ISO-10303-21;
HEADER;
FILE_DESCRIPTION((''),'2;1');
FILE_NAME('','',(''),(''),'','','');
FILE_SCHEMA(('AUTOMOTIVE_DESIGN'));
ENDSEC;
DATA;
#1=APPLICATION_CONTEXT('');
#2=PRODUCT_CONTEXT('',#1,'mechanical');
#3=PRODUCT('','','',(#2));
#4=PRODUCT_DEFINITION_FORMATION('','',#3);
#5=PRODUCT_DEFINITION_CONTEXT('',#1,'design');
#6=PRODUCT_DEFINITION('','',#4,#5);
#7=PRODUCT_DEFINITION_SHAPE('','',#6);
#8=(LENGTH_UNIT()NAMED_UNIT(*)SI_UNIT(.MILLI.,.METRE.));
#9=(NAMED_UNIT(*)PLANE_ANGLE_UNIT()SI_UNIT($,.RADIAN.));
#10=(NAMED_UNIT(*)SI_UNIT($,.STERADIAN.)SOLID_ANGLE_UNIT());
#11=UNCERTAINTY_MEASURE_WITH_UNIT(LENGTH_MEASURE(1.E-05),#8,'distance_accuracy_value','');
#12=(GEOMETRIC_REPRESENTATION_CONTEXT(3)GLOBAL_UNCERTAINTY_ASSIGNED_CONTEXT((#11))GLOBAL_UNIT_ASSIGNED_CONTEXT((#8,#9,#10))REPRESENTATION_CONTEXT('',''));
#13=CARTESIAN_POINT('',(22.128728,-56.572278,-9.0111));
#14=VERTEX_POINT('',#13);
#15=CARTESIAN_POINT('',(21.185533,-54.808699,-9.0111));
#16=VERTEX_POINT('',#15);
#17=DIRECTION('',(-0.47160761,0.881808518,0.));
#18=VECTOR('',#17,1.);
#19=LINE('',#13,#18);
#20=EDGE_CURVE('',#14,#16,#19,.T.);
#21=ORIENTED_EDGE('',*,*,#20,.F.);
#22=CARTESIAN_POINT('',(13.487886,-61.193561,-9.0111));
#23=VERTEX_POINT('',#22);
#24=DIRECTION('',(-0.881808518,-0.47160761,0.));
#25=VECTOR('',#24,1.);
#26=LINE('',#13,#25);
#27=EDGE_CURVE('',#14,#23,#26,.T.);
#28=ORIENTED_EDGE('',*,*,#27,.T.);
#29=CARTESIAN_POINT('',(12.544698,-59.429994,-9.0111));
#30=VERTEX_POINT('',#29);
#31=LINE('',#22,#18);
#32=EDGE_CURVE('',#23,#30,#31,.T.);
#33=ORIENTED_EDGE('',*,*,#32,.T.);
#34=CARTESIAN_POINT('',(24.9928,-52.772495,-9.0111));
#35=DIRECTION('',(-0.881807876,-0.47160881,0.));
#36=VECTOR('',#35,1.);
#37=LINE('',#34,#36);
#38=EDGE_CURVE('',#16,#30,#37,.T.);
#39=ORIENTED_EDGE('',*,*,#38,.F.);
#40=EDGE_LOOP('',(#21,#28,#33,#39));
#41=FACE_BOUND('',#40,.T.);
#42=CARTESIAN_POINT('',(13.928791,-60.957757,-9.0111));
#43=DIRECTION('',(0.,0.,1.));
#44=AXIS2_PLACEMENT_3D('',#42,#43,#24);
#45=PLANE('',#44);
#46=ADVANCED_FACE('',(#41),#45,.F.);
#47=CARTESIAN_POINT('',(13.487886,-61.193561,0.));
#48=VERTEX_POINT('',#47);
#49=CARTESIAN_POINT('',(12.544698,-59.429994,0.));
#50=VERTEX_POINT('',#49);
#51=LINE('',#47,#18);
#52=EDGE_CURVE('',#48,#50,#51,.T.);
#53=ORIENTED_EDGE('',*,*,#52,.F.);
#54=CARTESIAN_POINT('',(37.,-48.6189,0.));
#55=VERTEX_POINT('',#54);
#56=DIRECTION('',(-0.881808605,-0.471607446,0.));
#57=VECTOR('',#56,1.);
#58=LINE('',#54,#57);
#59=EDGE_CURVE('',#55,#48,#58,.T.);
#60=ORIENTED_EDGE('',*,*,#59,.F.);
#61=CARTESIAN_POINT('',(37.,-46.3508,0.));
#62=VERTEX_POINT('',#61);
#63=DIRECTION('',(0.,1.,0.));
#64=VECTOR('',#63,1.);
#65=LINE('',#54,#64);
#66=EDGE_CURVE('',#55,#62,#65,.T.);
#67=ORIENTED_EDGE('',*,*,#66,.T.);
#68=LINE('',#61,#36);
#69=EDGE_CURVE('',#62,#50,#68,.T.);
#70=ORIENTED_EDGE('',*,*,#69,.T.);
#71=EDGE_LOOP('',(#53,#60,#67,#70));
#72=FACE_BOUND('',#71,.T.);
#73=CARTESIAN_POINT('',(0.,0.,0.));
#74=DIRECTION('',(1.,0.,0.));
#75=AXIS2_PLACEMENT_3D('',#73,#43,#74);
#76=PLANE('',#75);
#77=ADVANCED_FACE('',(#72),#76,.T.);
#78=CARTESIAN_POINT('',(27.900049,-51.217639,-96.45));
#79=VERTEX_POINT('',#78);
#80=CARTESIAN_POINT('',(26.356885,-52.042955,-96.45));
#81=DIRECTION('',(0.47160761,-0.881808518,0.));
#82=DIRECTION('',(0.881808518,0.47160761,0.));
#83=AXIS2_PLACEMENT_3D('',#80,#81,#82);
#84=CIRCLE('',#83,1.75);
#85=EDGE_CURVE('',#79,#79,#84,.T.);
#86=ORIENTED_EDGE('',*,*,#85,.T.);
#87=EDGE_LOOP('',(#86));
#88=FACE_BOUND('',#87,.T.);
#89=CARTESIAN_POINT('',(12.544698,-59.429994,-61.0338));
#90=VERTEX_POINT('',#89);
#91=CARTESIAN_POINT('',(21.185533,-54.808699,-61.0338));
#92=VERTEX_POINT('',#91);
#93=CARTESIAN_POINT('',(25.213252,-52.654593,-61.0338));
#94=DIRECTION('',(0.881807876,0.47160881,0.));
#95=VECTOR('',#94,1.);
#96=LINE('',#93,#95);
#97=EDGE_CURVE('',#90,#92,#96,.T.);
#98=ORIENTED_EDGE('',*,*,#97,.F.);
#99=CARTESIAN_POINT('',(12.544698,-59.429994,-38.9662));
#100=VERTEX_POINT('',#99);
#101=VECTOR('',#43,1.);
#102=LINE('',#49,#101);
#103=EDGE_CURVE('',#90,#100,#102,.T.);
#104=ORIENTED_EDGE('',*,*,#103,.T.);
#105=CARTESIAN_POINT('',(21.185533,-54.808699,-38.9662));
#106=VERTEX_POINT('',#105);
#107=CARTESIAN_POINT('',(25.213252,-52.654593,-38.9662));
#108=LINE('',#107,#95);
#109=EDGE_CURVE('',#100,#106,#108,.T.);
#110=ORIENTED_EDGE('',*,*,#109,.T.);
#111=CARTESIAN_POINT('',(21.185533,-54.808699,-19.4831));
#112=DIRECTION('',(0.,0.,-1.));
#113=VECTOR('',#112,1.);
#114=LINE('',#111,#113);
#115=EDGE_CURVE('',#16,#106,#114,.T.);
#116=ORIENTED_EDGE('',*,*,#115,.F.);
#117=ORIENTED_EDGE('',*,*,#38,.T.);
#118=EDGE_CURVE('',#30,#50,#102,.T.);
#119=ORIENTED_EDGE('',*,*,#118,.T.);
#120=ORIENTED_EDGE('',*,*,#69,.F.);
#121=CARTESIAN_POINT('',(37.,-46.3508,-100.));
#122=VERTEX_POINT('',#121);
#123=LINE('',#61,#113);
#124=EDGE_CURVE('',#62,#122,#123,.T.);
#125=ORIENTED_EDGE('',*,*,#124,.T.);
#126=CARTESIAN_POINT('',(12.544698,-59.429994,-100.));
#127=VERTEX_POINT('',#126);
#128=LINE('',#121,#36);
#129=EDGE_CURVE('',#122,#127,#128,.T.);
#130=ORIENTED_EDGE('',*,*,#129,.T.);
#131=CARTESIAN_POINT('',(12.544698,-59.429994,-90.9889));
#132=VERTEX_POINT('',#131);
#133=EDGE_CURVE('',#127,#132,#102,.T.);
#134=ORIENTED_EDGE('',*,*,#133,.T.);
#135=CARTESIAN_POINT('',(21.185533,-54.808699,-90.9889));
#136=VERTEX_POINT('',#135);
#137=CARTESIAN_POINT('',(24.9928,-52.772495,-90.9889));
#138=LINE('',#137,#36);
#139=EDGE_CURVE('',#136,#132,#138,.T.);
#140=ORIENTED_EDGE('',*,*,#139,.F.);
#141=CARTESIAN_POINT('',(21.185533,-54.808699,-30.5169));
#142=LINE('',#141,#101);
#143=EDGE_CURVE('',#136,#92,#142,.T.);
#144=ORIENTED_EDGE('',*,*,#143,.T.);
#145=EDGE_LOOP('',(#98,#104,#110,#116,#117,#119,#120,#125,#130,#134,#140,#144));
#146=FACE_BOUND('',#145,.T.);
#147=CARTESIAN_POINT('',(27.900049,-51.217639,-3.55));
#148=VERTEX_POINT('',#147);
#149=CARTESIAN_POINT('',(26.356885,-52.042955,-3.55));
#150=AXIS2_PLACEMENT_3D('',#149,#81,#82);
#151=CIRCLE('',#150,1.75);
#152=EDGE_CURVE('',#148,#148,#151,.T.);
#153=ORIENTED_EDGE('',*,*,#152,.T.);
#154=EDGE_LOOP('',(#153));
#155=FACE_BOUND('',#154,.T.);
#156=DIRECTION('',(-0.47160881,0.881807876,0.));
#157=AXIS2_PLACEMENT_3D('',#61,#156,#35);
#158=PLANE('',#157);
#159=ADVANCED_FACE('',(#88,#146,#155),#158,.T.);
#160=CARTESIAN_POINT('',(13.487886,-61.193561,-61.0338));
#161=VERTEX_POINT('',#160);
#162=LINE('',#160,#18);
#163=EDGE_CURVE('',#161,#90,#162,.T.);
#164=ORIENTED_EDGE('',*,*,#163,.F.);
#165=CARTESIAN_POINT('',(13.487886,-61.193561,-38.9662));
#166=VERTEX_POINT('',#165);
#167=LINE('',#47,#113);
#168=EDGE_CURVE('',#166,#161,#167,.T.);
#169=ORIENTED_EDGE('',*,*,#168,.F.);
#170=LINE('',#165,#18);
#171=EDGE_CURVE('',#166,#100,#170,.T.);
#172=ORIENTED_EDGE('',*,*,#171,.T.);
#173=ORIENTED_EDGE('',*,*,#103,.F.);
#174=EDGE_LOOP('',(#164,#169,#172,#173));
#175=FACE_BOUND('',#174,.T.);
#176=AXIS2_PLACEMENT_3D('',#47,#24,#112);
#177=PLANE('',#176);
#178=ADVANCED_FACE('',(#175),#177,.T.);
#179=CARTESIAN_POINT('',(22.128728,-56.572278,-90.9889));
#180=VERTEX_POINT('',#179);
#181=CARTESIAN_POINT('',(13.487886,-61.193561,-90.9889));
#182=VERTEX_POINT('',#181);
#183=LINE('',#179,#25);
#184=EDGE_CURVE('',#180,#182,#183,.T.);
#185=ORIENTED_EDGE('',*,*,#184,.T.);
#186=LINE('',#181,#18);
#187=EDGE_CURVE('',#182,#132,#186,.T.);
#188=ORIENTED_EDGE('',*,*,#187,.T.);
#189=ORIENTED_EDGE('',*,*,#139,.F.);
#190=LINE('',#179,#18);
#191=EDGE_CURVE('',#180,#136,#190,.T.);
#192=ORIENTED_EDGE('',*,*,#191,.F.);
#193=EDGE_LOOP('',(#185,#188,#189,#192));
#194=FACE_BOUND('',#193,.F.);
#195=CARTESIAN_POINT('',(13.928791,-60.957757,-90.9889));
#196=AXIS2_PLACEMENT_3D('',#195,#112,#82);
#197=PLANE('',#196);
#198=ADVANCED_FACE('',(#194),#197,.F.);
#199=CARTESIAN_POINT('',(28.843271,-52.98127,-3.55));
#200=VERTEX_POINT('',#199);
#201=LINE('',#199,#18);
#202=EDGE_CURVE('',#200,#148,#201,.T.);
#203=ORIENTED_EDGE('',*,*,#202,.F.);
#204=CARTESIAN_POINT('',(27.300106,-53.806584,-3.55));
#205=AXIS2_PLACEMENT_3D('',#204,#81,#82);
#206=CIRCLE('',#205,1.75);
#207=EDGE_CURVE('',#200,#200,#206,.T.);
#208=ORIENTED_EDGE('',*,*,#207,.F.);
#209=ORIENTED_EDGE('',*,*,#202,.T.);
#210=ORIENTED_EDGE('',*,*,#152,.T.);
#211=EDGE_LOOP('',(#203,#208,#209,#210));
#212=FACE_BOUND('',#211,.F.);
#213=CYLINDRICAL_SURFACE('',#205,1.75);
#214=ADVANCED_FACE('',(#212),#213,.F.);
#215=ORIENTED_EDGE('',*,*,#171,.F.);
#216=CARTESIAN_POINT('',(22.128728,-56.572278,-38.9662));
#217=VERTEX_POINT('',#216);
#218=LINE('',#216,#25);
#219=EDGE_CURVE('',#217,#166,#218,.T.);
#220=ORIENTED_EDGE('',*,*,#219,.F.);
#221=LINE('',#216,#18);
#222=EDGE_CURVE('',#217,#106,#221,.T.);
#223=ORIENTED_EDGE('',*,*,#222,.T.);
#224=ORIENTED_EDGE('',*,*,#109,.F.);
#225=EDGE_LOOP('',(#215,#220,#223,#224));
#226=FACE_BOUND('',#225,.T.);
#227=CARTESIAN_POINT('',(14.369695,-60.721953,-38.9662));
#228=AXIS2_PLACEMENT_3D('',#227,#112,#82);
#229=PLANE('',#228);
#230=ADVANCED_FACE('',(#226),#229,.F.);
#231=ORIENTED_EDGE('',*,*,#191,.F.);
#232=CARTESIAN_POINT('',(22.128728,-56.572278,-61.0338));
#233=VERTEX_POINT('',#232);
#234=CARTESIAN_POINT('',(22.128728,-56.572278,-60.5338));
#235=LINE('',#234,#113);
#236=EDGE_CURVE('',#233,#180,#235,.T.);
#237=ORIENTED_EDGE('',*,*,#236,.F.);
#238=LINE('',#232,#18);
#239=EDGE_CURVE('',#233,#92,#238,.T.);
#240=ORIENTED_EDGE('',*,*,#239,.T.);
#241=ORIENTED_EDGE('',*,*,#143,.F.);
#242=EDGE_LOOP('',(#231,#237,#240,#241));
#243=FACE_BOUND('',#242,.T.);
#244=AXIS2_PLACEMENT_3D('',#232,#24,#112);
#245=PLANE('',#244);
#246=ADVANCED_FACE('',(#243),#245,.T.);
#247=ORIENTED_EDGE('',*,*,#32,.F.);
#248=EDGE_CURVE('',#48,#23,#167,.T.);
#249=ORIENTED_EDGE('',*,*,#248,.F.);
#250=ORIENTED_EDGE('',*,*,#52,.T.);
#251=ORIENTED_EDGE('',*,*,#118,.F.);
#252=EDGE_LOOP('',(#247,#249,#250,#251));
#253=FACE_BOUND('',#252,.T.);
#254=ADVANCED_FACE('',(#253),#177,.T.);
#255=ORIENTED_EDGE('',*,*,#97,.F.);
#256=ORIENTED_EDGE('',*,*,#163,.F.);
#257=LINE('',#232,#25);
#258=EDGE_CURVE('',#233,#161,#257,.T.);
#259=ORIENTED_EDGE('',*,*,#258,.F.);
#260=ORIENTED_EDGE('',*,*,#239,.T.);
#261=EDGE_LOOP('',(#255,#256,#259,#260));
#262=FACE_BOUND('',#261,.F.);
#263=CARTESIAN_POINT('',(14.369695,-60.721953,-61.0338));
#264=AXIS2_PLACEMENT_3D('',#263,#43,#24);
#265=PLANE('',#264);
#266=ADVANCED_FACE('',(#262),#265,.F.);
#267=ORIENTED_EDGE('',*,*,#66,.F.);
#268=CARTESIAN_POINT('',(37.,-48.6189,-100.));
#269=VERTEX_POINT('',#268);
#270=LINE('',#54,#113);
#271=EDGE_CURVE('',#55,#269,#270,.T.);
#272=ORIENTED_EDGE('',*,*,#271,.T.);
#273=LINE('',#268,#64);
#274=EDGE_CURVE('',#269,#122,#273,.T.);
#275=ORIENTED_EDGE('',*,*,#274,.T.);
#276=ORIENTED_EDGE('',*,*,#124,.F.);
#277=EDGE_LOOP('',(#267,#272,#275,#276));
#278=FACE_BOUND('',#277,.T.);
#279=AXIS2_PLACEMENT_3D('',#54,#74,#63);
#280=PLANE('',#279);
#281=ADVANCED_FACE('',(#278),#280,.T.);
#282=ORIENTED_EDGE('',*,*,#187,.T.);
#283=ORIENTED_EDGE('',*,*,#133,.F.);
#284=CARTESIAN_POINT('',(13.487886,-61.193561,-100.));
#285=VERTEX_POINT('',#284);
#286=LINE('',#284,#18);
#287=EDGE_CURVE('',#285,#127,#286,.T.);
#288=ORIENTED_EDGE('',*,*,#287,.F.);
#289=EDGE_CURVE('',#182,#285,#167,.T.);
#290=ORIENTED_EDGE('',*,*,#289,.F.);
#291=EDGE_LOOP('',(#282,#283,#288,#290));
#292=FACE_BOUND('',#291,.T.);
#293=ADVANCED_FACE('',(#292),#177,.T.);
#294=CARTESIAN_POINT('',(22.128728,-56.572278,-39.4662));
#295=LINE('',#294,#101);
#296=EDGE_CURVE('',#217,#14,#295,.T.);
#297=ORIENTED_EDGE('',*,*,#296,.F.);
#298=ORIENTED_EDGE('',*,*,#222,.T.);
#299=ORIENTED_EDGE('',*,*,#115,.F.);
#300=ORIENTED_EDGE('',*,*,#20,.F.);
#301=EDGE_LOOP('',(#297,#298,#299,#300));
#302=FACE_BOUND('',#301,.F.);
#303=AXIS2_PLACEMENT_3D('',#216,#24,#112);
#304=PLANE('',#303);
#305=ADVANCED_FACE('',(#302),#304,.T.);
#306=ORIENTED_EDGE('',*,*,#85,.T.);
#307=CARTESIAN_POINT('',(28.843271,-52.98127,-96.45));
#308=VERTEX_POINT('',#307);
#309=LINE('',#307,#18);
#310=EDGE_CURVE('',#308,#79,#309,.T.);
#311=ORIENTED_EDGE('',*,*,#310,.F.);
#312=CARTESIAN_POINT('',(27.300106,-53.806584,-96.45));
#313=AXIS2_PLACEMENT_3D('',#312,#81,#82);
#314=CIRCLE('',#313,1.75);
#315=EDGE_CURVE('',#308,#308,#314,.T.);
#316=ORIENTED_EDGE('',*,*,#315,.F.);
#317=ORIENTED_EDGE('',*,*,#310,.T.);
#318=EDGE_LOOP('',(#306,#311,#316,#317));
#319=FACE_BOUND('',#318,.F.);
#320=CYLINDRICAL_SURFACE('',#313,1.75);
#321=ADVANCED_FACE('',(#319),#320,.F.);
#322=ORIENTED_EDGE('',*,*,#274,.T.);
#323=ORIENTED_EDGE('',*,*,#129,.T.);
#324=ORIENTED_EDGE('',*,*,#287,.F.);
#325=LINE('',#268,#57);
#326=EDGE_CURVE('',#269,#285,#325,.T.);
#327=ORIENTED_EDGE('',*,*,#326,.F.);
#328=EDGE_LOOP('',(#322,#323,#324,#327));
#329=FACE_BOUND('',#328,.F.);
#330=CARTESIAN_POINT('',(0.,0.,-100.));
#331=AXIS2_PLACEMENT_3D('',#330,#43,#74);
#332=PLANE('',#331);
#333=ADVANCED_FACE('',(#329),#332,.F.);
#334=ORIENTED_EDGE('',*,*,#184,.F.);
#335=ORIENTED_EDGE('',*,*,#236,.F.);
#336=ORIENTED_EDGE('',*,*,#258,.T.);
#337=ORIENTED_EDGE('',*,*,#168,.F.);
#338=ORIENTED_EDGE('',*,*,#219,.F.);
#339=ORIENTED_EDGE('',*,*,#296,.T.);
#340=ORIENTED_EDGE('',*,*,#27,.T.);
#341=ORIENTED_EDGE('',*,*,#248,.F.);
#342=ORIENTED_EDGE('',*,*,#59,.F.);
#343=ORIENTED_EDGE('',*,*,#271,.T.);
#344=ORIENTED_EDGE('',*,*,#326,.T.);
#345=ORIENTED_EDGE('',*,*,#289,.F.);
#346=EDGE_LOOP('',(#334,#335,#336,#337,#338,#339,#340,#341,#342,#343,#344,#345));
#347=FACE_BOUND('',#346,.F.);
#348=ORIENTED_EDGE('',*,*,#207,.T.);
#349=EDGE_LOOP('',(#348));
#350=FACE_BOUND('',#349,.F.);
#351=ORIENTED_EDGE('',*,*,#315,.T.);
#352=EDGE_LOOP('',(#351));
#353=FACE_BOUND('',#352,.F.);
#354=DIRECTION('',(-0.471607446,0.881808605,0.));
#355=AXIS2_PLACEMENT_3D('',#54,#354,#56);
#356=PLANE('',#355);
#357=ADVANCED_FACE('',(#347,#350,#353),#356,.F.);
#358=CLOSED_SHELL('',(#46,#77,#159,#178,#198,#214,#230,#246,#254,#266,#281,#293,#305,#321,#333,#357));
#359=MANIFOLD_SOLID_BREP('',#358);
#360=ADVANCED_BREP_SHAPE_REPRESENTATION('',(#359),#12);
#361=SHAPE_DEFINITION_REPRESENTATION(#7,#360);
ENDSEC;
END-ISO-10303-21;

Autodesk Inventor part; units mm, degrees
ref_plane "YZ Plane" through (0, 0, 0) normal (1, 0, 0) x (0, 1, 0)
ref_plane "XZ Plane" through (0, 0, 0) normal (0, 1, 0) x (-1, 0, 0)
ref_plane "XY Plane" through (0, 0, 0) normal (0, 0, 1) x (1, 0, 0)
sketch "Szkic1" plane through (0, 0, 0) normal (0, 0, 1) x (1, 0, 0)
  line L0 (0, 0) -> (0, -66.5) projected
  line L1 (0, -66.5) -> (2, -66.5) projected
  line L2 (2, 0) -> (2, -66.5) projected
  line L3 (0, 0) -> (2, 0) projected
  circle A0 centre (7, 15.8) radius 1.5 projected
  circle A1 centre (7, 15.8) radius 15.02 projected
  line L4 (7, 30.82) -> (7, 14.3)
  line L5 (7, -69.18) -> (-7.0129, -69.18)
  line L6 (37, -46.3508) -> (4.3309, -63.8229) projected
  line L7 (37, -48.6189) -> (3.5105, -66.5297) projected
  line L8 (37, -48.6189) -> (37, -46.3508)
  line L9 (37, -48.6189) -> (-1.4451, -69.18)
  line L10 (37, -46.3508) -> (-1.4451, -66.9119)
  line L11 (-1.4451, -66.9119) -> (-1.4451, -69.18)
  dimension "d0" = 100
extrude "Wyciągnięcie proste1" add sketch "Szkic1" against normal blind 100 contours L10 L2 L1 L0 | L0 L1 L2 L10 L6 L8 L7 L9 L11
sketch "Szkic5" plane through (-1.4451, -69.18, -100) normal (0.4716076, -0.8818085, 0) x (0.8818085, 0.4716076, 0)
  line L0 (17.9345, 9.0111) -> (17.7164, 38.6148) projected
  line L1 (17.7164, 38.6148) -> (26.2335, 38.9662) projected
  line L2 (26.4517, 9.3625) -> (17.9345, 9.0111) projected
  line L3 (26.2335, 38.9662) -> (17.9345, 38.9662)
  line L4 (17.9345, 38.9662) -> (17.9345, 9.0111)
  line L5 (17.9345, 9.0111) -> (26.2335, 9.0111)
  line L6 (26.2335, 9.0111) -> (26.2335, 38.9662)
  line L7 (17.4345, 39.4662) -> (26.7335, 39.4662)
  line L8 (26.7335, 39.4662) -> (26.7335, 8.5111)
  line L9 (26.7335, 8.5111) -> (17.4345, 8.5111)
  line L10 (17.4345, 8.5111) -> (17.4345, 39.4662)
  line L11 (17.4345, 39.4662) -> (16.9345, 39.4662)
  line L12 (16.9345, 39.4662) -> (16.9345, 8.5111)
  line L13 (16.9345, 8.5111) -> (17.4345, 8.5111)
  line L14 (17.4345, 8.5111) -> (17.4345, 39.4662)
  line L15 (26.7335, 38.9662) -> (16.9345, 38.9662)
  line L16 (16.9345, 38.9662) -> (16.9345, 9.0111)
  line L17 (16.9345, 9.0111) -> (26.7335, 9.0111)
  line L18 (26.7335, 9.0111) -> (26.7335, 38.9662)
  point P0 (33.9001, 100)
  point P1 (17.9345, 9.0111)
  point P2 (26.7335, 9.0111)
  point P3 (17.9345, 38.9662)
  dimension "d7" = 0.5
  dimension "d8" = 0.5
extrude "Wyciągnięcie proste4" cut sketch "Szkic5" against normal through all contours L17 L10 L15 L4 L1 L0 | L4 L1 L6 L2 | L0 L1 L4 | L2 L6 L5 | L6 L15 L8 L17 | L4 L3 L1 | L17 L12 L15 L10
ref_plane "Płaszczyzna konstrukcyjna1" through (0, 0, -50) normal (0, 0, 1) x (1, 0, 0)
mirror "Odbij1" about plane through (0, 0, -50) normal (0, 0, 1) of "Wyciągnięcie proste4"
sketch "Szkic6" plane through (-1.4451, -69.18, -100) normal (0.4716076, -0.8818085, 0) x (0.8818085, 0.4716076, 0)
  line L0 (0, 100) -> (1.0696, 100) projected
  line L1 (0, 100) -> (0, 0) projected
  line L2 (1.0696, 0) -> (0, 0) projected
  line L3 (1.0696, 0) -> (44.6676, 0) projected
  line L4 (0, 100) -> (16.9345, 100)
  line L5 (16.9345, 100) -> (16.9345, 0)
  line L6 (16.9345, 0) -> (0, 0)
  line L7 (0, 0) -> (0, 100)
  line L8 (0, 0) -> (1.0696, 0) projected
  line L9 (0, 0) -> (-9.525, 0)
  line L10 (-9.525, 0) -> (-9.525, 100)
  line L11 (-9.525, 100) -> (0, 100)
  line L12 (0, 100) -> (0, 0)
  line L13 (1.0696, 0) -> (1.0696, 100) projected
  point P0 (33.9001, 100)
  point P1 (43.598, 0)
  point P2 (16.9345, 0)
  point P3 (0, 100)
  point P4 (16.9345, 61.0338)
  point P5 (16.9345, 90.9889)
  point P6 (16.9345, 9.0111)
  point P7 (16.9345, 38.9662)
extrude "Wyciągnięcie proste5" cut sketch "Szkic6" against normal through all
sketch "Szkic7" plane through (37, -48.6189, -100) normal (0.4716076, -0.8818085, 0) x (0.8818085, 0.4716076, 0)
  line L0 (-26.6634, 90.9889) -> (-16.8645, 90.9889) projected
  line L1 (-16.8645, 90.9889) -> (-16.8645, 61.0338) projected
  line L2 (-16.8645, 61.0338) -> (-26.6634, 61.0338) projected
  line L3 (-26.6634, 38.9662) -> (-16.8645, 38.9662) projected
  line L4 (-16.8645, 38.9662) -> (-16.8645, 9.0111) projected
  line L5 (-16.8645, 9.0111) -> (-26.6634, 9.0111) projected
  line L6 (0, 0) -> (-26.6634, 0) projected
  line L7 (0, 100) -> (0, 0) projected
  line L8 (-26.6634, 100) -> (0, 100) projected
  line L9 (-26.6634, 90.9889) -> (-26.6634, 100) projected
  line L10 (0, 100) -> (-26.6634, 100)
  line L11 (-26.6634, 100) -> (-26.6634, 92.9)
  line L12 (-26.6634, 92.9) -> (0, 92.9)
  line L13 (0, 92.9) -> (0, 100)
  line L14 (-16.8645, 90.9889) -> (-16.8645, 100)
  line L15 (1.0696, 100) -> (-42.5283, 100) projected
  circle A0 centre (-11, 96.45) radius 1.75
  line L16 (-52.6978, 50) -> (11.0012, 50) projected
  circle A1 centre (-11, 3.55) radius 1.75
  line L17 (-26.6634, 100) -> (-26.6634, 90.9889) projected
  line L18 (-26.6634, 61.0338) -> (-26.6634, 38.9662) projected
  line L19 (-26.6634, 9.0111) -> (-26.6634, 0) projected
  point P0 (-9.6979, 100)
  point P1 (0, 96.45)
  dimension "d13" = 7.1
  dimension "d15" = 11
  dimension "d16" = 3.55
  dimension "d17" = 3.5
extrude "Wyciągnięcie proste6" cut sketch "Szkic7" against normal through all contours A0 | A1
sketch "Szkic8" plane through (37, -46.3508, 0) normal (-0.4716076, 0.8818085, 0) x (0.8818085, 0.4716076, 0)
  circle A0 centre (-12.0696, 96.45) radius 1.75 projected
  circle A1 centre (-12.0696, 3.55) radius 1.75 projected
  line L0 (-27.7331, 9.0111) -> (-27.7331, 0) projected
  line L1 (0, 0) -> (-27.7331, 0) projected
  line L2 (0, 0) -> (0, 100) projected
  line L3 (-27.7331, 100) -> (0, 100) projected
  line L4 (-27.7331, 100) -> (-27.7331, 90.9889) projected
  line L5 (-27.7331, 90.9889) -> (-17.9341, 90.9889) projected
  line L6 (-17.9341, 90.9889) -> (-17.9341, 61.0338) projected
  line L7 (-17.9341, 61.0338) -> (-27.7331, 61.0338) projected
  line L8 (-27.7331, 61.0338) -> (-27.7331, 38.9662) projected
  line L9 (-27.7331, 38.9662) -> (-17.9341, 38.9662) projected
  line L10 (-17.9341, 38.9662) -> (-17.9341, 9.0111) projected
  line L11 (-17.9341, 9.0111) -> (-27.7331, 9.0111) projected
  point P0 (-10.7675, 0)
properties part number "plug_2"
